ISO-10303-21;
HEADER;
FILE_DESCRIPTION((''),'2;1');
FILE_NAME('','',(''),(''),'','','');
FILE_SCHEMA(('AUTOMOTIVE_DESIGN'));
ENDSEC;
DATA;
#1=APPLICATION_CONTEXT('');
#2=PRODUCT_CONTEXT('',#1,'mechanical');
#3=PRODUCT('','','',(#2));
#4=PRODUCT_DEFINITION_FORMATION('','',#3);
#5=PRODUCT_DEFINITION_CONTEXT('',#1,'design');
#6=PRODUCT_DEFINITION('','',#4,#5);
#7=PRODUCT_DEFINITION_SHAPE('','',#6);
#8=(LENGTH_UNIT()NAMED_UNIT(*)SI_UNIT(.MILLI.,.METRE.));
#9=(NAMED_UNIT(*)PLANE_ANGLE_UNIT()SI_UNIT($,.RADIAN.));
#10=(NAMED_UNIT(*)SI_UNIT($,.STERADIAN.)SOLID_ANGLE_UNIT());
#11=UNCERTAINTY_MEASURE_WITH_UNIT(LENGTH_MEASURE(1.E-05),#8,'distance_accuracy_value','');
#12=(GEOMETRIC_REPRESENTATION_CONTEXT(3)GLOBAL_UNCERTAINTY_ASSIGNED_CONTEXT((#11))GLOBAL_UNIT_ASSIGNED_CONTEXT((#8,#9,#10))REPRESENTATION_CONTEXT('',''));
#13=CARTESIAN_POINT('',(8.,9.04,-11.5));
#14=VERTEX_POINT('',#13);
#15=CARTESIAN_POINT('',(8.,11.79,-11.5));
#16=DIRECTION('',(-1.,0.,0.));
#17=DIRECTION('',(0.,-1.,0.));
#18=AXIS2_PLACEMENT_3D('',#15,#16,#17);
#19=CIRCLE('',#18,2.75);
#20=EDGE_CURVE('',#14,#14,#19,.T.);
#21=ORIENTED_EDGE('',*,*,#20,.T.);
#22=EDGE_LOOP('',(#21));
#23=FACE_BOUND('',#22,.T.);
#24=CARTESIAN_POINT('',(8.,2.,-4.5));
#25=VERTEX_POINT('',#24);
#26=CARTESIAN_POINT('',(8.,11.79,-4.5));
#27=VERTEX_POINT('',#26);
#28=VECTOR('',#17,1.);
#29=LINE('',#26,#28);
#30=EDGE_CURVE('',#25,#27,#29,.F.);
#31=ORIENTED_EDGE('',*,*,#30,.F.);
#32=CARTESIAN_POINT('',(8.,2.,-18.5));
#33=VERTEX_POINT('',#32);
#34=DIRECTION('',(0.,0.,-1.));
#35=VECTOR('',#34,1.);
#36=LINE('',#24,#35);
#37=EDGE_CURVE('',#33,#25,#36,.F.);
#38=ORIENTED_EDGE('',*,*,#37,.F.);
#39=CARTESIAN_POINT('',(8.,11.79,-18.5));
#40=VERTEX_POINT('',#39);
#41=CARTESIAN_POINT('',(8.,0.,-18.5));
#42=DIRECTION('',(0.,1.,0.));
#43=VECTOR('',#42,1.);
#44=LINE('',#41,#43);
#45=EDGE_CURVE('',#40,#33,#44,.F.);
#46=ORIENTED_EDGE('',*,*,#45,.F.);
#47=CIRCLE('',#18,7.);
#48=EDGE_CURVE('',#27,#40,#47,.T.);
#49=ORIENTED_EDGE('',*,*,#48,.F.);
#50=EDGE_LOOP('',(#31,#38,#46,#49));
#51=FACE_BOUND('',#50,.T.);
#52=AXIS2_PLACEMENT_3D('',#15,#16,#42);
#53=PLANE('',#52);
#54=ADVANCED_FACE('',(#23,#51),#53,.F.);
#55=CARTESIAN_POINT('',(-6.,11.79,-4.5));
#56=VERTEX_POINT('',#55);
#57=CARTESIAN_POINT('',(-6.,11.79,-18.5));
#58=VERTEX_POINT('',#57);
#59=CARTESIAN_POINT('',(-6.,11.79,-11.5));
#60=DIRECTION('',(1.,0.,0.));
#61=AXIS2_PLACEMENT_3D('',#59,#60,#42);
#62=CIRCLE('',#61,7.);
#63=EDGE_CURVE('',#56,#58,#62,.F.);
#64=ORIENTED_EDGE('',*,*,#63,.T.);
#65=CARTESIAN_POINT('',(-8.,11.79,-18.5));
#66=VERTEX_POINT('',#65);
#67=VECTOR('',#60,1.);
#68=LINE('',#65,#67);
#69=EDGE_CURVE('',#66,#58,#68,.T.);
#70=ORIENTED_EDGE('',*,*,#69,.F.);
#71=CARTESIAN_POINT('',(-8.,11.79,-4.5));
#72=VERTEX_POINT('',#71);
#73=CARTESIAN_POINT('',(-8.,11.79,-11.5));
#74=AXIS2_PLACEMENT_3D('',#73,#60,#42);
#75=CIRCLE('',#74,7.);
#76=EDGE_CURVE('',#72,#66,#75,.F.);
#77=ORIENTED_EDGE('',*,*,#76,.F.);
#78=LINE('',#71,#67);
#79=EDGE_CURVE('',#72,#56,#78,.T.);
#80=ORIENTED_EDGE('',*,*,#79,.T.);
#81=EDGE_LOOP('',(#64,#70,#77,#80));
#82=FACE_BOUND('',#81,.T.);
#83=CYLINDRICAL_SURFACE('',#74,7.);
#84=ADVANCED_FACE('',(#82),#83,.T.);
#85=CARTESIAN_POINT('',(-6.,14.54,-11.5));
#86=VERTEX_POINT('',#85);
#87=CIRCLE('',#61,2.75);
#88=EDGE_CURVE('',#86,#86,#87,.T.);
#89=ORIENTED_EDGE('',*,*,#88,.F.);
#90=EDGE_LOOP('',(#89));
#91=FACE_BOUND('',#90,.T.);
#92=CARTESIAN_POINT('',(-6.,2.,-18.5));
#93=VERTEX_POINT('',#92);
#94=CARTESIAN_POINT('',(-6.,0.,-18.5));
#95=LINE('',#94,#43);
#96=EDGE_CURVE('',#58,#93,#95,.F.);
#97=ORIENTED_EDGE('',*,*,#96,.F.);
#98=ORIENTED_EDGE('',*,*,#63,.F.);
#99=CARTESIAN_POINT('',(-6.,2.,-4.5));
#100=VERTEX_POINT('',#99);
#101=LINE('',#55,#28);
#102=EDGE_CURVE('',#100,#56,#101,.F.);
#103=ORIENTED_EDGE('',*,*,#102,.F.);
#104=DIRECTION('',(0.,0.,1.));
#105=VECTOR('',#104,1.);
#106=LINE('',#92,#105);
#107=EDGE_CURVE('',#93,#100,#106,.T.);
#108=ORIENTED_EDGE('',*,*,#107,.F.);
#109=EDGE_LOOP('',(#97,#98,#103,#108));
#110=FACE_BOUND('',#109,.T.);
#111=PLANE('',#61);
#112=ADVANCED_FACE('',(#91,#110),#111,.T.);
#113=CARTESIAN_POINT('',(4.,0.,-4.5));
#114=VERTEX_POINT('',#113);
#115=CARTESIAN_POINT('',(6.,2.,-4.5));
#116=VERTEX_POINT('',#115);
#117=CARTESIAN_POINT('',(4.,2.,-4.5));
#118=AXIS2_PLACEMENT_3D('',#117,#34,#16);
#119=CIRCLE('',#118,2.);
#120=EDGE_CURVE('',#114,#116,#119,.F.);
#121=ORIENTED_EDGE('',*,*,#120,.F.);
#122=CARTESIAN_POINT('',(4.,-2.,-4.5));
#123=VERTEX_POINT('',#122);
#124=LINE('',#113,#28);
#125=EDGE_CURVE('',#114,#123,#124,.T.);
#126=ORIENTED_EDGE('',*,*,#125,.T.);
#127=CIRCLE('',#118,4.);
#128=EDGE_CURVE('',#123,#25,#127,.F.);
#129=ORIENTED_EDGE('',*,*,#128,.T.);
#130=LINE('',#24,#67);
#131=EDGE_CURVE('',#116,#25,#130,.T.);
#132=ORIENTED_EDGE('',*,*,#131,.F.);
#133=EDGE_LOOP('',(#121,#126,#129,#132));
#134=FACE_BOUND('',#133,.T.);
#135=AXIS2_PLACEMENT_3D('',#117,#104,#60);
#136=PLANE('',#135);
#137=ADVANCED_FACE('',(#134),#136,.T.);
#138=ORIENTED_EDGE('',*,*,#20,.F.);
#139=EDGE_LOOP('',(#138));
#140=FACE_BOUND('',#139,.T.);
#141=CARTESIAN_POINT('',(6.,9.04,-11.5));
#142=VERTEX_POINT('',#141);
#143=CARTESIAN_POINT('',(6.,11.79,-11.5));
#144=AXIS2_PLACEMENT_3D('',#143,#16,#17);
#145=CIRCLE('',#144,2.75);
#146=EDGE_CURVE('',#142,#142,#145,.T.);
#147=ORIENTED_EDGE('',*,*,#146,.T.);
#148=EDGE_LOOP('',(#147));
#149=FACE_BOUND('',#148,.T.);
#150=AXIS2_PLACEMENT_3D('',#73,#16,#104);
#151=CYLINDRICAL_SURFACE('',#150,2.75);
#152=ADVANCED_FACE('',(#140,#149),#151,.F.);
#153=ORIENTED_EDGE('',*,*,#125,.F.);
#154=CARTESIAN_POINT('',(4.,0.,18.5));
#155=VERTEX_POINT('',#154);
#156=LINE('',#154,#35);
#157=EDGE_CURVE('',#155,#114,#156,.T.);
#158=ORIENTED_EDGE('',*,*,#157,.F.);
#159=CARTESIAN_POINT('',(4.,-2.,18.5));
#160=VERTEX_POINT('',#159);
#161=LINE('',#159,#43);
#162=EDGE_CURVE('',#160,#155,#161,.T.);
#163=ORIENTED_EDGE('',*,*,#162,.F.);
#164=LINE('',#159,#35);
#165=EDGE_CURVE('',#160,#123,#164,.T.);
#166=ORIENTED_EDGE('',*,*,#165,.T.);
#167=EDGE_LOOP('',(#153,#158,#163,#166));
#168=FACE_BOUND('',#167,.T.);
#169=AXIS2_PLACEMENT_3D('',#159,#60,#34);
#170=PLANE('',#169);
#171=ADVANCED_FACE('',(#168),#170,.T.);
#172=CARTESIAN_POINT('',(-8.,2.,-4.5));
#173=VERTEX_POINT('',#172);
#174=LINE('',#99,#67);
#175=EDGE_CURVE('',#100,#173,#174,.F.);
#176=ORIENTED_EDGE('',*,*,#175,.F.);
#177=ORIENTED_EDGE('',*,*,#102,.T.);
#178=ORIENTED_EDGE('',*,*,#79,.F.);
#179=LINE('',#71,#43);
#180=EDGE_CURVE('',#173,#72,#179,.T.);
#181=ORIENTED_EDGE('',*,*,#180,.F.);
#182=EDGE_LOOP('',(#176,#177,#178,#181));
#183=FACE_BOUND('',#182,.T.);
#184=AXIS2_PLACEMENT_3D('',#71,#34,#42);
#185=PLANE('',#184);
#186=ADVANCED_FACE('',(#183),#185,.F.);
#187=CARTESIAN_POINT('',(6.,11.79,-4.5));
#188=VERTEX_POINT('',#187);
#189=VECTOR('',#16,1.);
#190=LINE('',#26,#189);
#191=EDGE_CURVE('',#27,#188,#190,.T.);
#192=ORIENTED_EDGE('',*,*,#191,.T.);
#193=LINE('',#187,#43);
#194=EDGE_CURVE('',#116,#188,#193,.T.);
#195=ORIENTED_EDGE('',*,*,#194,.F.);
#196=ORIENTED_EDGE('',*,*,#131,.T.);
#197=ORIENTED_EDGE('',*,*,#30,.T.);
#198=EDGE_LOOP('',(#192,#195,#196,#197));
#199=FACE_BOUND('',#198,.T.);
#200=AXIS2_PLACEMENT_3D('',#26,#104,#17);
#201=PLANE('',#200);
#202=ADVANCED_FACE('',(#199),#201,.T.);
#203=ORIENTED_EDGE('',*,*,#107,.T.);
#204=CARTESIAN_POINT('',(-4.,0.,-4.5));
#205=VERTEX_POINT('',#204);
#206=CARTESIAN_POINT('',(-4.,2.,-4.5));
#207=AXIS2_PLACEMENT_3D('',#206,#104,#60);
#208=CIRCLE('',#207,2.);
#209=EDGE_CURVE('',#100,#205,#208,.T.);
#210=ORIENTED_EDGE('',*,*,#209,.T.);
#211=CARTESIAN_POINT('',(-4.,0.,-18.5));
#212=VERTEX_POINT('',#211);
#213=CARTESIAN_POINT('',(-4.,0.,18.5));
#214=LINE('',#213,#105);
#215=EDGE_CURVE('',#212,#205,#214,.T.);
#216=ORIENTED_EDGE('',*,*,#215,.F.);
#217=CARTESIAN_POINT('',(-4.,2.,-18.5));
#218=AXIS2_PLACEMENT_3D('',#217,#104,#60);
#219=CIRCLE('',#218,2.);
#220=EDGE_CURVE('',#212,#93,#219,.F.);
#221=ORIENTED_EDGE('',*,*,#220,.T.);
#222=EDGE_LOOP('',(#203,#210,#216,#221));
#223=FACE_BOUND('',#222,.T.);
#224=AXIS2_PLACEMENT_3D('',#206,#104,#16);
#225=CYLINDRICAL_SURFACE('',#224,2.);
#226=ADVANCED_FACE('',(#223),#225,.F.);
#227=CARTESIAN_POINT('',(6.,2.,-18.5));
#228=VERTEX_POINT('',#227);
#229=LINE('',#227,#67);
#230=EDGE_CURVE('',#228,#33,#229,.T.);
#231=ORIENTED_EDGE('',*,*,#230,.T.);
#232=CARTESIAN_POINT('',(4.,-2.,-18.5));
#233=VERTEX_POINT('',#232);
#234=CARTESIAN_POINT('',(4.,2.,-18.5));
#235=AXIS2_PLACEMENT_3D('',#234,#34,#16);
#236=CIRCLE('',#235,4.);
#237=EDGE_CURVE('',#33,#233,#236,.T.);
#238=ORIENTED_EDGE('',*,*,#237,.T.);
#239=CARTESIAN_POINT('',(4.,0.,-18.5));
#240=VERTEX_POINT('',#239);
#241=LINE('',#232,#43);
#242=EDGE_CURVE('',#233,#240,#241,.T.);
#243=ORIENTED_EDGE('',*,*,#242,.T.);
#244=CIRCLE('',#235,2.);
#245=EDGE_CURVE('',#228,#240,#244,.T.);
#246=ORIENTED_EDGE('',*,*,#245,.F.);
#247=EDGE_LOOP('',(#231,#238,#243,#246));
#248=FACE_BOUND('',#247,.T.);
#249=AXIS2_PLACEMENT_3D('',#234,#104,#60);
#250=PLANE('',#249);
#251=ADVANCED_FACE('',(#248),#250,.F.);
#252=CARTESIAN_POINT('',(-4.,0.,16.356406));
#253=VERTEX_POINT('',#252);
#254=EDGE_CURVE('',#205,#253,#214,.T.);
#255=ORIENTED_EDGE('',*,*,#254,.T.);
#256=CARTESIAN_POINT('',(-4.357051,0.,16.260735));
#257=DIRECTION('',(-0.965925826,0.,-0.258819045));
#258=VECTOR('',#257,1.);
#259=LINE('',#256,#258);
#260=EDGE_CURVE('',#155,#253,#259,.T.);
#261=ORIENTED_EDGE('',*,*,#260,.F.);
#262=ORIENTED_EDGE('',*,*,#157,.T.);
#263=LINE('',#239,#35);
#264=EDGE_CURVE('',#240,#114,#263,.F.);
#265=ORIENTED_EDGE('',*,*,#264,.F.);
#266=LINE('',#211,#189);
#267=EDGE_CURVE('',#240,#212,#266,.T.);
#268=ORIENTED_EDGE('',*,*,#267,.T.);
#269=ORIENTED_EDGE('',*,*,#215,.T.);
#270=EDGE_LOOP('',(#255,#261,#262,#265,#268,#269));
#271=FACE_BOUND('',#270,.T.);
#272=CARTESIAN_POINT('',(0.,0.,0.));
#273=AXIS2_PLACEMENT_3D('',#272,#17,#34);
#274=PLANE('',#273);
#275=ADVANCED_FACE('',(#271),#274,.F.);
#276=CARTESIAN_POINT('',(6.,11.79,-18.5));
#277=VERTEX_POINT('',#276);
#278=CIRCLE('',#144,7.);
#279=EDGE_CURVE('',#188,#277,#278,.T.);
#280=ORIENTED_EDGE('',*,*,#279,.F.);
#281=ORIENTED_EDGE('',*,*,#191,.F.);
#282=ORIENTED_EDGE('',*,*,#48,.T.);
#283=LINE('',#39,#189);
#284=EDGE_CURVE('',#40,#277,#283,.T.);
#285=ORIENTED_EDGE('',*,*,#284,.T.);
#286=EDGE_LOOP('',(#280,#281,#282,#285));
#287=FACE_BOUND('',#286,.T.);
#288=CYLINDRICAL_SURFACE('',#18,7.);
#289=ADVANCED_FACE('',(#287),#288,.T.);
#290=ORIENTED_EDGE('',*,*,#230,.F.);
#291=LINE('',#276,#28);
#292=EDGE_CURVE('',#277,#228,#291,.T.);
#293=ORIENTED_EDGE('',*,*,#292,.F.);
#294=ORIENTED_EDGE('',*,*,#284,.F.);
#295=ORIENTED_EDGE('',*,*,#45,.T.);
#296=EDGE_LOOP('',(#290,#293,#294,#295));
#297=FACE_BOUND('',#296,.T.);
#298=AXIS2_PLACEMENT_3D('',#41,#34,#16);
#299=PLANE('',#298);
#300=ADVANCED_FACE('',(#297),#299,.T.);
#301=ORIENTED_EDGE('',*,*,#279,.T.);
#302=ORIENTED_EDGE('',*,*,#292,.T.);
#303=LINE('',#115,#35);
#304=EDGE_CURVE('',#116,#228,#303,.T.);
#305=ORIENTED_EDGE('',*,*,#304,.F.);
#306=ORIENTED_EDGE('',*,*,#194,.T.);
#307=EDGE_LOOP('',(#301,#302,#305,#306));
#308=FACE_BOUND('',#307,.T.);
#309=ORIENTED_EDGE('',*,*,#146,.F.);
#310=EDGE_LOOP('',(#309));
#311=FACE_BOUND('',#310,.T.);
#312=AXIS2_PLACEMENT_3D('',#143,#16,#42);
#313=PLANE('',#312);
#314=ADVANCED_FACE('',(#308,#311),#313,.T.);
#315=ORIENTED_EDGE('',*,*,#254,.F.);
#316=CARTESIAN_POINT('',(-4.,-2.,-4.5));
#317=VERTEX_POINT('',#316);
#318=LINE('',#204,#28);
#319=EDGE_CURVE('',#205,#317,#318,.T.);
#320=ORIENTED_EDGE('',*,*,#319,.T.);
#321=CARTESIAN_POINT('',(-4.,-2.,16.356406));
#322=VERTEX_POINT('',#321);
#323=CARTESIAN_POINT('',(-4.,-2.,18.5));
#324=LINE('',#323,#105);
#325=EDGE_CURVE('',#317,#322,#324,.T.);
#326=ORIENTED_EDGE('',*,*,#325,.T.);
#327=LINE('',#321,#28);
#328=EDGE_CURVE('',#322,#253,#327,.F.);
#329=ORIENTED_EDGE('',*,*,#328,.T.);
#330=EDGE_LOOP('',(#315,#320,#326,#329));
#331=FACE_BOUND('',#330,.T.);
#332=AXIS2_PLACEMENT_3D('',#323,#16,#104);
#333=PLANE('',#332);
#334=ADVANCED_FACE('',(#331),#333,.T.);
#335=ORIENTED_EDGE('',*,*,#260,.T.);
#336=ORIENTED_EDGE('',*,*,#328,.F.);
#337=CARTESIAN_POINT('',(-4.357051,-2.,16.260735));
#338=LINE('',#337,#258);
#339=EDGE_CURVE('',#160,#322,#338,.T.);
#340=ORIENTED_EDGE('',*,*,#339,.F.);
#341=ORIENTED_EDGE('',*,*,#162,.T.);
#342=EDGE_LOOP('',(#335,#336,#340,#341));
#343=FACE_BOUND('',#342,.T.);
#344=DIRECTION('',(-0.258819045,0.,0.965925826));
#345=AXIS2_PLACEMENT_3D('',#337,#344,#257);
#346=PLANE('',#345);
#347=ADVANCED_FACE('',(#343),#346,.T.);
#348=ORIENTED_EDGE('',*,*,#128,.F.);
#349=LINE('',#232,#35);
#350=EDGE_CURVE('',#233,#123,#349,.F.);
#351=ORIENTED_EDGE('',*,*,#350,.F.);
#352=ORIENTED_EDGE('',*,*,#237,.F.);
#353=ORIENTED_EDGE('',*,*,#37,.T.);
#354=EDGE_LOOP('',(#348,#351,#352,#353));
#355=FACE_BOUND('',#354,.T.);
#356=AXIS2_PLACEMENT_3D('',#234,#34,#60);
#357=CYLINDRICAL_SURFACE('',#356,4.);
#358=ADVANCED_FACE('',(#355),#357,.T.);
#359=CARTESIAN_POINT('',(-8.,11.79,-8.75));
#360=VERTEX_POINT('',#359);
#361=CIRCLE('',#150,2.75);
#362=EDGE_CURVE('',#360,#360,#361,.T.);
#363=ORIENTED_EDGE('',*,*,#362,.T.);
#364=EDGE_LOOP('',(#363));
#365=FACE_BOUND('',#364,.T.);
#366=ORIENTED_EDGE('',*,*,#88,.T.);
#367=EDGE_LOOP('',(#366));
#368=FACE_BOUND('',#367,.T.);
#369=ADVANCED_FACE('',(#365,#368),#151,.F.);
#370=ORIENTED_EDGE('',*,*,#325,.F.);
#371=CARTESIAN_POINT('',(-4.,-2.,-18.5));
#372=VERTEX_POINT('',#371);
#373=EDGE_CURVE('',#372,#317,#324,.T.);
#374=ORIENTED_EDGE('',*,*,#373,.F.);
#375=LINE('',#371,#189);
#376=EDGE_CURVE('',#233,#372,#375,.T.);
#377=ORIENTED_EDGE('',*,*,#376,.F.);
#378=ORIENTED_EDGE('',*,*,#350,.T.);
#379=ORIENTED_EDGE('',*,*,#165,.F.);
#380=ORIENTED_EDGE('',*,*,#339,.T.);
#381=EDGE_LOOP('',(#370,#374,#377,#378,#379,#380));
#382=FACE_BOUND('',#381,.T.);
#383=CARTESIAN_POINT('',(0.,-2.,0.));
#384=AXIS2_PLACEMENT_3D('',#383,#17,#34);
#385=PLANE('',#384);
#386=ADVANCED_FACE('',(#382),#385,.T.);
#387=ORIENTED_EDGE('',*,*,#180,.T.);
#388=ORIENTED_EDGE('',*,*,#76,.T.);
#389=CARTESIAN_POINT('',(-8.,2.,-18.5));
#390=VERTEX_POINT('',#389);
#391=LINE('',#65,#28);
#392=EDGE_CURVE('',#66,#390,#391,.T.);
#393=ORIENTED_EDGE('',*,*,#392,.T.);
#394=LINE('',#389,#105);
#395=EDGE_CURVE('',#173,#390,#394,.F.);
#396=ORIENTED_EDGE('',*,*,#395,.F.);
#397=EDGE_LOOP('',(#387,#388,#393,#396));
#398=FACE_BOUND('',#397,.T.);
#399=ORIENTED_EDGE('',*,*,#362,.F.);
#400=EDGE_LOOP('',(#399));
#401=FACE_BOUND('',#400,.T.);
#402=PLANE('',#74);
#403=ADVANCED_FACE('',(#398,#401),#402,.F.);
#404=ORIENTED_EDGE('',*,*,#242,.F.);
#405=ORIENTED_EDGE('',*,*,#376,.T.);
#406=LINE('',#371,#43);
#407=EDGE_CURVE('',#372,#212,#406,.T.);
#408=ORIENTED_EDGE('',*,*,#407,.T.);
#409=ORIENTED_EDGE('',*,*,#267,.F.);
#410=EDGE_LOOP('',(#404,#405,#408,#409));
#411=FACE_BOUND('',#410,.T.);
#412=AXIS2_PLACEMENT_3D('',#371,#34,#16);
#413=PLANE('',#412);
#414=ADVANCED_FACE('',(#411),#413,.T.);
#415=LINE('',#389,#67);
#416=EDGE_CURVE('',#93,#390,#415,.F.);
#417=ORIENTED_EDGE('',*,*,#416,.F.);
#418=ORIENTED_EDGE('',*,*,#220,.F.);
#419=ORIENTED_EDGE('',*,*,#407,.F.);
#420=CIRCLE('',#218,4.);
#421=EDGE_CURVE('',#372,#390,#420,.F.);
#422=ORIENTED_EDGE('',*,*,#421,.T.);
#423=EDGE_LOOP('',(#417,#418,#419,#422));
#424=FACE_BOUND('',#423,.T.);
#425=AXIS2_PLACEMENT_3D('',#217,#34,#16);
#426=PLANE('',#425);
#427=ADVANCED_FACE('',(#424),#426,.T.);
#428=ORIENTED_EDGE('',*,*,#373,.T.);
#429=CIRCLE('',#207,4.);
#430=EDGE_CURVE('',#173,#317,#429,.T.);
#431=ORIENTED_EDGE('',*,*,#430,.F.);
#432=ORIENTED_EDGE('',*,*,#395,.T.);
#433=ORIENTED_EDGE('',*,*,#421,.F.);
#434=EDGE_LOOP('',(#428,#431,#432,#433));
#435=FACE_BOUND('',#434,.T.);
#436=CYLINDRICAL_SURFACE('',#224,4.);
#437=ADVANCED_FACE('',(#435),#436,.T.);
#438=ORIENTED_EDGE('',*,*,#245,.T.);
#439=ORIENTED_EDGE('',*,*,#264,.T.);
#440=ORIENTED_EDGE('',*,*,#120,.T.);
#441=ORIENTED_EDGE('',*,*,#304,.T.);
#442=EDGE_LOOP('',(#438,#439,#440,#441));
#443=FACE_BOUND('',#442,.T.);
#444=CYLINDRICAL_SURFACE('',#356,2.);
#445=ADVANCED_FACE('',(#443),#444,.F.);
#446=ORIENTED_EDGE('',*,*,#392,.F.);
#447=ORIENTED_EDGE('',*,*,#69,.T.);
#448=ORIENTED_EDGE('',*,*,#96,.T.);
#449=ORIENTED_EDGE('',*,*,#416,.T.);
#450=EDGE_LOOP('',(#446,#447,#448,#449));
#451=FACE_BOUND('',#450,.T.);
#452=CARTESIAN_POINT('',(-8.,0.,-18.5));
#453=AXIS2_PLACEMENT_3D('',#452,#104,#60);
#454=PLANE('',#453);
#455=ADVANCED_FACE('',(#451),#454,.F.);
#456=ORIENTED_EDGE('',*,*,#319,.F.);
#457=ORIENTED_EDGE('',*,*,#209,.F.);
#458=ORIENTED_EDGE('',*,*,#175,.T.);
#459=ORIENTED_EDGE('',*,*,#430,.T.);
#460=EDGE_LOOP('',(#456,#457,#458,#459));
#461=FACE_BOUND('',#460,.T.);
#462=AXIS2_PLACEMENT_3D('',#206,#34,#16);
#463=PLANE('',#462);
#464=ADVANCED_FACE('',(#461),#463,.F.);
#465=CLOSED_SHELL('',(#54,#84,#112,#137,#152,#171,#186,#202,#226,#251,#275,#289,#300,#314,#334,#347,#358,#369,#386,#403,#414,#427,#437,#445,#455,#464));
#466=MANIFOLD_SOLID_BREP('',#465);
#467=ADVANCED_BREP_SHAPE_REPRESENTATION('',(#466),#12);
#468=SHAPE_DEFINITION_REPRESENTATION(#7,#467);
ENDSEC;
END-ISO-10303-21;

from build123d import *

# Parameters (mm, degrees)
SKETCH_2_W                  = 8
SKETCH_2_H                  = 37
SM_BASE_FLANGE_1_DEPTH      = 2
SM_EDGE_FLANGE_1_DEPTH      = 14
SM_START                    = 2
SM_EDGE_FLANGE_1_FLAT_DEPTH = 2
HOLE_WIZARD_M5_2_D          = 5.5
CUT_EXTRUDE_1_DEPTH         = 28.555654592
CUT_EXTRUDE_1_DEPTH_BACK    = 28.555654592


# Sheet-metal steps are written as plain solids
with BuildPart() as part:
    # Sketch 2 → 基体-法兰1 (new body)
    with BuildSketch(Plane(origin=(0, 0, 0), x_dir=(1, 0, 0), z_dir=(0, 1, 0))):
        Rectangle(SKETCH_2_W, SKETCH_2_H)
    extrude(amount=-SM_BASE_FLANGE_1_DEPTH)

    # 边线-法兰1 bend section (across the edge) → 边线-法兰1 (add)
    with BuildSketch(Plane(origin=(-6, 0, -18.5), x_dir=(1, 0, 0), z_dir=(0, 0, 1))):
        with BuildLine():
            Line((-2, 2), (0, 2))
            ThreePointArc((0, 2), (0.585786438, 0.585786438), (2, 0))
            Line((2, 0), (2, -2))
            ThreePointArc((2, -2), (-0.828427125, -0.828427125), (-2, 2))
        make_face()
    sm_edge_flange_1 = extrude(amount=SM_EDGE_FLANGE_1_DEPTH)

    # 边线-法兰1 profile (on flange) → 边线-法兰1 flat (add)
    with BuildSketch(Plane.ZY.offset(6).offset(SM_START)):
        with BuildLine():
            ThreePointArc((-4.5, 11.79), (-11.5, 18.79), (-18.5, 11.79))
            Line((-18.5, 11.79), (-18.5, 2))
            Line((-18.5, 2), (-4.5, 2))
            Line((-4.5, 2), (-4.5, 11.79))
        make_face()
    sm_edge_flange_1_flat = extrude(amount=-SM_EDGE_FLANGE_1_FLAT_DEPTH)

    # 镜向1: 边线-法兰1, 边线-法兰1 flat across plane
    add(sm_edge_flange_1.mirror(Plane(origin=(0, 0, 0), x_dir=(0, 0, 1), z_dir=(1, 0, 0))))
    add(sm_edge_flange_1_flat.mirror(Plane(origin=(0, 0, 0), x_dir=(0, 0, 1), z_dir=(1, 0, 0))))

    # M5 间隙孔2 (through all)
    with Locations(Plane.ZY.offset(8)):
        with Locations((-11.5, 11.79)):
            Hole(HOLE_WIZARD_M5_2_D / 2)

    # 草图22 → 切除-拉伸1 (cut, two sides: drawn at the far end of the back side and taken through both)
    with BuildSketch(Plane(origin=(0, 0, 0), x_dir=(1, 0, 0), z_dir=(0, 1, 0)).offset(-CUT_EXTRUDE_1_DEPTH_BACK)):
        Polygon((88.803072858, -41.222914888), (4, -18.5), (-4, -16.356406461), (-88.803072858, 6.366508427), (-134.248902633, -163.239637288), (43.357243082, -210.829060603), align=None)
    extrude(amount=CUT_EXTRUDE_1_DEPTH + CUT_EXTRUDE_1_DEPTH_BACK, mode=Mode.SUBTRACT)


solid = part.part
